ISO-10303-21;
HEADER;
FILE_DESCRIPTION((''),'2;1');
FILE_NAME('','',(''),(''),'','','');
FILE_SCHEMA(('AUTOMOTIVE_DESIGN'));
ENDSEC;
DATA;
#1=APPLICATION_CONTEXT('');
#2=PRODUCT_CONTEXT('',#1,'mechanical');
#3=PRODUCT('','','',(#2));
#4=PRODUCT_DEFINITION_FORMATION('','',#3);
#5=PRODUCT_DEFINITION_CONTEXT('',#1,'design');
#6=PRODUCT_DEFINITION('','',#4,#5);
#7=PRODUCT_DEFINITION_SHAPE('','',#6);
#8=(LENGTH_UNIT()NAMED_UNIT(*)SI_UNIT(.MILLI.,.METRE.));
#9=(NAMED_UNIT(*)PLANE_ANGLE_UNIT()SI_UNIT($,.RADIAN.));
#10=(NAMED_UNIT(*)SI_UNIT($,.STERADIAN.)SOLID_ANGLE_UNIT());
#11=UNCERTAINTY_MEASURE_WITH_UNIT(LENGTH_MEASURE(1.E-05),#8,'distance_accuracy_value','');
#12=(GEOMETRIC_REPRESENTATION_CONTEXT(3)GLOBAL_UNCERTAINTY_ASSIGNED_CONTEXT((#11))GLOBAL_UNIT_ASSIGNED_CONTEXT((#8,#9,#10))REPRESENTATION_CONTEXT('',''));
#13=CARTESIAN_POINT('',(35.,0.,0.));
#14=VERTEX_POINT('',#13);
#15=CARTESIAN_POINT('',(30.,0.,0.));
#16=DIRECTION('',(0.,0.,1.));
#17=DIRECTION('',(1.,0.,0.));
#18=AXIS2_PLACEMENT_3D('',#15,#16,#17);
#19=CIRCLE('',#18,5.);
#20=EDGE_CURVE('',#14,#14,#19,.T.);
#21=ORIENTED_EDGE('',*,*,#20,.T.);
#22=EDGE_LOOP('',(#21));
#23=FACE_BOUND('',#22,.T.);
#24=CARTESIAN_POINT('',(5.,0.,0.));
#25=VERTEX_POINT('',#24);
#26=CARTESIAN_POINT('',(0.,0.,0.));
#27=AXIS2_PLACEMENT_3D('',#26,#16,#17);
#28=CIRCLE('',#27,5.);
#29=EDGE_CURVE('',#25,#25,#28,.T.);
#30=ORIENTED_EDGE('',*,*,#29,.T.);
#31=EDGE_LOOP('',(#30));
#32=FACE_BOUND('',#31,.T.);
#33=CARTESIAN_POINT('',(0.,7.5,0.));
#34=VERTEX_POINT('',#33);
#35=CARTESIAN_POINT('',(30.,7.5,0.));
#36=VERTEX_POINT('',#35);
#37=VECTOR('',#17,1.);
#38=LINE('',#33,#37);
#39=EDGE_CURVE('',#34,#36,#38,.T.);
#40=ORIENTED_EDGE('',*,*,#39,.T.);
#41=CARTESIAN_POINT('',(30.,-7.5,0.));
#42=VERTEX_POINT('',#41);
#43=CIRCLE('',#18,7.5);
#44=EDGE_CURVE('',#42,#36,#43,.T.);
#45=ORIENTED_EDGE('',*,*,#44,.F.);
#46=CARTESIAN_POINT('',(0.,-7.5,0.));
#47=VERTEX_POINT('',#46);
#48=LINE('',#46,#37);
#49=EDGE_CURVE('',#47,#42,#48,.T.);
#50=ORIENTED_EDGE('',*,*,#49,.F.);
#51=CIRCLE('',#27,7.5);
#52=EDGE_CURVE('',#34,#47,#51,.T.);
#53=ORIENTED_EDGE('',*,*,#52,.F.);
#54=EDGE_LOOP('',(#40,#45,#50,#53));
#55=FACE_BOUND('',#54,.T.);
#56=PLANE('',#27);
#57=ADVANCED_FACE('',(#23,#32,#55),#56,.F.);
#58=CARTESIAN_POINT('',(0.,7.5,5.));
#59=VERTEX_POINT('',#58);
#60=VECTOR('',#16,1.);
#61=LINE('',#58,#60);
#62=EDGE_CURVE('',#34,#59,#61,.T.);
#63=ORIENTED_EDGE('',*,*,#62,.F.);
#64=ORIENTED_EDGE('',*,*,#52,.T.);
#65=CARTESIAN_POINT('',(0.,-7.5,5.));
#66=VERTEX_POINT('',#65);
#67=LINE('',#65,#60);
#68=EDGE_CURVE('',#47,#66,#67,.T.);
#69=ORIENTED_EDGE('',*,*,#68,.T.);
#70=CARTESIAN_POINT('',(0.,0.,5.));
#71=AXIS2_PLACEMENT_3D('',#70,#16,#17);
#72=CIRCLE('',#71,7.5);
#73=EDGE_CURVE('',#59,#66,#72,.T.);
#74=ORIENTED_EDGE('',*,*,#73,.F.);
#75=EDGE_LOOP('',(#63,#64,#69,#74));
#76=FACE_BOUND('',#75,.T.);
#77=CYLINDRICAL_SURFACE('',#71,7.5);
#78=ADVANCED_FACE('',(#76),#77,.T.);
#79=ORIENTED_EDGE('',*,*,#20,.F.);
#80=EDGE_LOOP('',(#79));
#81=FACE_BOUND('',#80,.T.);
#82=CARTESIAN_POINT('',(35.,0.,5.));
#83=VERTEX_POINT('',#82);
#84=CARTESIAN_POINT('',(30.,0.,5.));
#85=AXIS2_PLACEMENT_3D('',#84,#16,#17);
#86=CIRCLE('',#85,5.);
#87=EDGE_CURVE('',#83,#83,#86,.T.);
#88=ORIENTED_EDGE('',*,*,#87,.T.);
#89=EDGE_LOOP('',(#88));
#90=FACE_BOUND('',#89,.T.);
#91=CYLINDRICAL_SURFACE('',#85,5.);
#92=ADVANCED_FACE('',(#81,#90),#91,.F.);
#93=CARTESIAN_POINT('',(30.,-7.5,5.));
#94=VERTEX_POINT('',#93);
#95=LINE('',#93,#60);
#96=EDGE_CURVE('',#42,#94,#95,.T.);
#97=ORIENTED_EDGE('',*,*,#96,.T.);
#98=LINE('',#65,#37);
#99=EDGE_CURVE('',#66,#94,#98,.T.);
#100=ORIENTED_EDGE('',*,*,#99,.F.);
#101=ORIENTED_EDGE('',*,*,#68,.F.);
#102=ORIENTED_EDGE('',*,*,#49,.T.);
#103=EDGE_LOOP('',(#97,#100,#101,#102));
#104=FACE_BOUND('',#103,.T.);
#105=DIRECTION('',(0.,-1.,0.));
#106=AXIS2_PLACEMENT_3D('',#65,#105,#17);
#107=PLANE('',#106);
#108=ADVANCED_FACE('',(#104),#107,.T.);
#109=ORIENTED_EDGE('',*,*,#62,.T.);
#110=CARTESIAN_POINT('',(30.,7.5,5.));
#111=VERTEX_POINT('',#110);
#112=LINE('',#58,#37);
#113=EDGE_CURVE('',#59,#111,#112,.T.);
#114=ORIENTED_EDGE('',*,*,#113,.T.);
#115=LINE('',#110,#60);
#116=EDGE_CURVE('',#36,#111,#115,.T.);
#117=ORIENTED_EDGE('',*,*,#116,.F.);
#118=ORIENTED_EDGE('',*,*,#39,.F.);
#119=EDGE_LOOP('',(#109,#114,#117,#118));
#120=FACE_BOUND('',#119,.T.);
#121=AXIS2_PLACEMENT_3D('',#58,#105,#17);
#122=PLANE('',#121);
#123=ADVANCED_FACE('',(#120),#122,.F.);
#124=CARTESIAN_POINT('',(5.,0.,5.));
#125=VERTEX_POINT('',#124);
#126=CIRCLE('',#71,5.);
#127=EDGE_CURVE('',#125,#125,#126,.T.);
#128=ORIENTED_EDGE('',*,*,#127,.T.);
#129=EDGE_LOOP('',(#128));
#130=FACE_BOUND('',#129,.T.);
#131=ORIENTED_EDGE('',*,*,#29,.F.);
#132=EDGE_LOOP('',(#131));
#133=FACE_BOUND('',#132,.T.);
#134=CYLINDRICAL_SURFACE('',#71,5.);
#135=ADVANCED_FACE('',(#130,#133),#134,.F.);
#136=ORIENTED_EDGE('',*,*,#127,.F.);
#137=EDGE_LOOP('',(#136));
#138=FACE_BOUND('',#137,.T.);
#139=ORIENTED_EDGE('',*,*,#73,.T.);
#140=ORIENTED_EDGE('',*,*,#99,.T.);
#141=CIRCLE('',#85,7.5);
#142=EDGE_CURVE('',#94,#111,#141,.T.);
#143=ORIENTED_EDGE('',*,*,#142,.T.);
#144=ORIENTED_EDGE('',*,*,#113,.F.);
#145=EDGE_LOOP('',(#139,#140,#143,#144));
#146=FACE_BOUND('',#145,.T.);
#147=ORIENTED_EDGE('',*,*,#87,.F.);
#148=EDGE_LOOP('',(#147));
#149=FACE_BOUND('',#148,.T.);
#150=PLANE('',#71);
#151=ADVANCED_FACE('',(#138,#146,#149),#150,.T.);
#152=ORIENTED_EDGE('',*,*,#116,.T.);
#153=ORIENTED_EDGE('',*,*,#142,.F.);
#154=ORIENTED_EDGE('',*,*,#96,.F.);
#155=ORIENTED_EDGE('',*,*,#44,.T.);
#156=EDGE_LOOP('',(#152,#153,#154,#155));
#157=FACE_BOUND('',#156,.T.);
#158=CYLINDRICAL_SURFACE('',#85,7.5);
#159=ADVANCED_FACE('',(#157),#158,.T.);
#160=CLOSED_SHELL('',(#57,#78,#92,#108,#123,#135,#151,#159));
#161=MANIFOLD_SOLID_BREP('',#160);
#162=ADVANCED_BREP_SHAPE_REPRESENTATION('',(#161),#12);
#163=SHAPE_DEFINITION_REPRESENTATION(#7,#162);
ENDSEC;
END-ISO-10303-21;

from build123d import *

# Parameters (mm, degrees)
SKETCH1_R           = 5
BOSS_EXTRUDE1_DEPTH = 5


with BuildPart() as part:
    # Sketch1 → Boss-Extrude1 (new body)
    with BuildSketch(Plane.XY):
        with BuildLine():
            ThreePointArc((0, 7.5), (-7.5, 0), (0, -7.5))
            Line((0, -7.5), (30, -7.5))
            ThreePointArc((30, -7.5), (37.5, 0), (30, 7.5))
            Line((30, 7.5), (0, 7.5))
        make_face()
        Circle(SKETCH1_R, mode=Mode.SUBTRACT)
        with Locations((30, 0)):
            Circle(SKETCH1_R, mode=Mode.SUBTRACT)
    extrude(amount=BOSS_EXTRUDE1_DEPTH)


solid = part.part
